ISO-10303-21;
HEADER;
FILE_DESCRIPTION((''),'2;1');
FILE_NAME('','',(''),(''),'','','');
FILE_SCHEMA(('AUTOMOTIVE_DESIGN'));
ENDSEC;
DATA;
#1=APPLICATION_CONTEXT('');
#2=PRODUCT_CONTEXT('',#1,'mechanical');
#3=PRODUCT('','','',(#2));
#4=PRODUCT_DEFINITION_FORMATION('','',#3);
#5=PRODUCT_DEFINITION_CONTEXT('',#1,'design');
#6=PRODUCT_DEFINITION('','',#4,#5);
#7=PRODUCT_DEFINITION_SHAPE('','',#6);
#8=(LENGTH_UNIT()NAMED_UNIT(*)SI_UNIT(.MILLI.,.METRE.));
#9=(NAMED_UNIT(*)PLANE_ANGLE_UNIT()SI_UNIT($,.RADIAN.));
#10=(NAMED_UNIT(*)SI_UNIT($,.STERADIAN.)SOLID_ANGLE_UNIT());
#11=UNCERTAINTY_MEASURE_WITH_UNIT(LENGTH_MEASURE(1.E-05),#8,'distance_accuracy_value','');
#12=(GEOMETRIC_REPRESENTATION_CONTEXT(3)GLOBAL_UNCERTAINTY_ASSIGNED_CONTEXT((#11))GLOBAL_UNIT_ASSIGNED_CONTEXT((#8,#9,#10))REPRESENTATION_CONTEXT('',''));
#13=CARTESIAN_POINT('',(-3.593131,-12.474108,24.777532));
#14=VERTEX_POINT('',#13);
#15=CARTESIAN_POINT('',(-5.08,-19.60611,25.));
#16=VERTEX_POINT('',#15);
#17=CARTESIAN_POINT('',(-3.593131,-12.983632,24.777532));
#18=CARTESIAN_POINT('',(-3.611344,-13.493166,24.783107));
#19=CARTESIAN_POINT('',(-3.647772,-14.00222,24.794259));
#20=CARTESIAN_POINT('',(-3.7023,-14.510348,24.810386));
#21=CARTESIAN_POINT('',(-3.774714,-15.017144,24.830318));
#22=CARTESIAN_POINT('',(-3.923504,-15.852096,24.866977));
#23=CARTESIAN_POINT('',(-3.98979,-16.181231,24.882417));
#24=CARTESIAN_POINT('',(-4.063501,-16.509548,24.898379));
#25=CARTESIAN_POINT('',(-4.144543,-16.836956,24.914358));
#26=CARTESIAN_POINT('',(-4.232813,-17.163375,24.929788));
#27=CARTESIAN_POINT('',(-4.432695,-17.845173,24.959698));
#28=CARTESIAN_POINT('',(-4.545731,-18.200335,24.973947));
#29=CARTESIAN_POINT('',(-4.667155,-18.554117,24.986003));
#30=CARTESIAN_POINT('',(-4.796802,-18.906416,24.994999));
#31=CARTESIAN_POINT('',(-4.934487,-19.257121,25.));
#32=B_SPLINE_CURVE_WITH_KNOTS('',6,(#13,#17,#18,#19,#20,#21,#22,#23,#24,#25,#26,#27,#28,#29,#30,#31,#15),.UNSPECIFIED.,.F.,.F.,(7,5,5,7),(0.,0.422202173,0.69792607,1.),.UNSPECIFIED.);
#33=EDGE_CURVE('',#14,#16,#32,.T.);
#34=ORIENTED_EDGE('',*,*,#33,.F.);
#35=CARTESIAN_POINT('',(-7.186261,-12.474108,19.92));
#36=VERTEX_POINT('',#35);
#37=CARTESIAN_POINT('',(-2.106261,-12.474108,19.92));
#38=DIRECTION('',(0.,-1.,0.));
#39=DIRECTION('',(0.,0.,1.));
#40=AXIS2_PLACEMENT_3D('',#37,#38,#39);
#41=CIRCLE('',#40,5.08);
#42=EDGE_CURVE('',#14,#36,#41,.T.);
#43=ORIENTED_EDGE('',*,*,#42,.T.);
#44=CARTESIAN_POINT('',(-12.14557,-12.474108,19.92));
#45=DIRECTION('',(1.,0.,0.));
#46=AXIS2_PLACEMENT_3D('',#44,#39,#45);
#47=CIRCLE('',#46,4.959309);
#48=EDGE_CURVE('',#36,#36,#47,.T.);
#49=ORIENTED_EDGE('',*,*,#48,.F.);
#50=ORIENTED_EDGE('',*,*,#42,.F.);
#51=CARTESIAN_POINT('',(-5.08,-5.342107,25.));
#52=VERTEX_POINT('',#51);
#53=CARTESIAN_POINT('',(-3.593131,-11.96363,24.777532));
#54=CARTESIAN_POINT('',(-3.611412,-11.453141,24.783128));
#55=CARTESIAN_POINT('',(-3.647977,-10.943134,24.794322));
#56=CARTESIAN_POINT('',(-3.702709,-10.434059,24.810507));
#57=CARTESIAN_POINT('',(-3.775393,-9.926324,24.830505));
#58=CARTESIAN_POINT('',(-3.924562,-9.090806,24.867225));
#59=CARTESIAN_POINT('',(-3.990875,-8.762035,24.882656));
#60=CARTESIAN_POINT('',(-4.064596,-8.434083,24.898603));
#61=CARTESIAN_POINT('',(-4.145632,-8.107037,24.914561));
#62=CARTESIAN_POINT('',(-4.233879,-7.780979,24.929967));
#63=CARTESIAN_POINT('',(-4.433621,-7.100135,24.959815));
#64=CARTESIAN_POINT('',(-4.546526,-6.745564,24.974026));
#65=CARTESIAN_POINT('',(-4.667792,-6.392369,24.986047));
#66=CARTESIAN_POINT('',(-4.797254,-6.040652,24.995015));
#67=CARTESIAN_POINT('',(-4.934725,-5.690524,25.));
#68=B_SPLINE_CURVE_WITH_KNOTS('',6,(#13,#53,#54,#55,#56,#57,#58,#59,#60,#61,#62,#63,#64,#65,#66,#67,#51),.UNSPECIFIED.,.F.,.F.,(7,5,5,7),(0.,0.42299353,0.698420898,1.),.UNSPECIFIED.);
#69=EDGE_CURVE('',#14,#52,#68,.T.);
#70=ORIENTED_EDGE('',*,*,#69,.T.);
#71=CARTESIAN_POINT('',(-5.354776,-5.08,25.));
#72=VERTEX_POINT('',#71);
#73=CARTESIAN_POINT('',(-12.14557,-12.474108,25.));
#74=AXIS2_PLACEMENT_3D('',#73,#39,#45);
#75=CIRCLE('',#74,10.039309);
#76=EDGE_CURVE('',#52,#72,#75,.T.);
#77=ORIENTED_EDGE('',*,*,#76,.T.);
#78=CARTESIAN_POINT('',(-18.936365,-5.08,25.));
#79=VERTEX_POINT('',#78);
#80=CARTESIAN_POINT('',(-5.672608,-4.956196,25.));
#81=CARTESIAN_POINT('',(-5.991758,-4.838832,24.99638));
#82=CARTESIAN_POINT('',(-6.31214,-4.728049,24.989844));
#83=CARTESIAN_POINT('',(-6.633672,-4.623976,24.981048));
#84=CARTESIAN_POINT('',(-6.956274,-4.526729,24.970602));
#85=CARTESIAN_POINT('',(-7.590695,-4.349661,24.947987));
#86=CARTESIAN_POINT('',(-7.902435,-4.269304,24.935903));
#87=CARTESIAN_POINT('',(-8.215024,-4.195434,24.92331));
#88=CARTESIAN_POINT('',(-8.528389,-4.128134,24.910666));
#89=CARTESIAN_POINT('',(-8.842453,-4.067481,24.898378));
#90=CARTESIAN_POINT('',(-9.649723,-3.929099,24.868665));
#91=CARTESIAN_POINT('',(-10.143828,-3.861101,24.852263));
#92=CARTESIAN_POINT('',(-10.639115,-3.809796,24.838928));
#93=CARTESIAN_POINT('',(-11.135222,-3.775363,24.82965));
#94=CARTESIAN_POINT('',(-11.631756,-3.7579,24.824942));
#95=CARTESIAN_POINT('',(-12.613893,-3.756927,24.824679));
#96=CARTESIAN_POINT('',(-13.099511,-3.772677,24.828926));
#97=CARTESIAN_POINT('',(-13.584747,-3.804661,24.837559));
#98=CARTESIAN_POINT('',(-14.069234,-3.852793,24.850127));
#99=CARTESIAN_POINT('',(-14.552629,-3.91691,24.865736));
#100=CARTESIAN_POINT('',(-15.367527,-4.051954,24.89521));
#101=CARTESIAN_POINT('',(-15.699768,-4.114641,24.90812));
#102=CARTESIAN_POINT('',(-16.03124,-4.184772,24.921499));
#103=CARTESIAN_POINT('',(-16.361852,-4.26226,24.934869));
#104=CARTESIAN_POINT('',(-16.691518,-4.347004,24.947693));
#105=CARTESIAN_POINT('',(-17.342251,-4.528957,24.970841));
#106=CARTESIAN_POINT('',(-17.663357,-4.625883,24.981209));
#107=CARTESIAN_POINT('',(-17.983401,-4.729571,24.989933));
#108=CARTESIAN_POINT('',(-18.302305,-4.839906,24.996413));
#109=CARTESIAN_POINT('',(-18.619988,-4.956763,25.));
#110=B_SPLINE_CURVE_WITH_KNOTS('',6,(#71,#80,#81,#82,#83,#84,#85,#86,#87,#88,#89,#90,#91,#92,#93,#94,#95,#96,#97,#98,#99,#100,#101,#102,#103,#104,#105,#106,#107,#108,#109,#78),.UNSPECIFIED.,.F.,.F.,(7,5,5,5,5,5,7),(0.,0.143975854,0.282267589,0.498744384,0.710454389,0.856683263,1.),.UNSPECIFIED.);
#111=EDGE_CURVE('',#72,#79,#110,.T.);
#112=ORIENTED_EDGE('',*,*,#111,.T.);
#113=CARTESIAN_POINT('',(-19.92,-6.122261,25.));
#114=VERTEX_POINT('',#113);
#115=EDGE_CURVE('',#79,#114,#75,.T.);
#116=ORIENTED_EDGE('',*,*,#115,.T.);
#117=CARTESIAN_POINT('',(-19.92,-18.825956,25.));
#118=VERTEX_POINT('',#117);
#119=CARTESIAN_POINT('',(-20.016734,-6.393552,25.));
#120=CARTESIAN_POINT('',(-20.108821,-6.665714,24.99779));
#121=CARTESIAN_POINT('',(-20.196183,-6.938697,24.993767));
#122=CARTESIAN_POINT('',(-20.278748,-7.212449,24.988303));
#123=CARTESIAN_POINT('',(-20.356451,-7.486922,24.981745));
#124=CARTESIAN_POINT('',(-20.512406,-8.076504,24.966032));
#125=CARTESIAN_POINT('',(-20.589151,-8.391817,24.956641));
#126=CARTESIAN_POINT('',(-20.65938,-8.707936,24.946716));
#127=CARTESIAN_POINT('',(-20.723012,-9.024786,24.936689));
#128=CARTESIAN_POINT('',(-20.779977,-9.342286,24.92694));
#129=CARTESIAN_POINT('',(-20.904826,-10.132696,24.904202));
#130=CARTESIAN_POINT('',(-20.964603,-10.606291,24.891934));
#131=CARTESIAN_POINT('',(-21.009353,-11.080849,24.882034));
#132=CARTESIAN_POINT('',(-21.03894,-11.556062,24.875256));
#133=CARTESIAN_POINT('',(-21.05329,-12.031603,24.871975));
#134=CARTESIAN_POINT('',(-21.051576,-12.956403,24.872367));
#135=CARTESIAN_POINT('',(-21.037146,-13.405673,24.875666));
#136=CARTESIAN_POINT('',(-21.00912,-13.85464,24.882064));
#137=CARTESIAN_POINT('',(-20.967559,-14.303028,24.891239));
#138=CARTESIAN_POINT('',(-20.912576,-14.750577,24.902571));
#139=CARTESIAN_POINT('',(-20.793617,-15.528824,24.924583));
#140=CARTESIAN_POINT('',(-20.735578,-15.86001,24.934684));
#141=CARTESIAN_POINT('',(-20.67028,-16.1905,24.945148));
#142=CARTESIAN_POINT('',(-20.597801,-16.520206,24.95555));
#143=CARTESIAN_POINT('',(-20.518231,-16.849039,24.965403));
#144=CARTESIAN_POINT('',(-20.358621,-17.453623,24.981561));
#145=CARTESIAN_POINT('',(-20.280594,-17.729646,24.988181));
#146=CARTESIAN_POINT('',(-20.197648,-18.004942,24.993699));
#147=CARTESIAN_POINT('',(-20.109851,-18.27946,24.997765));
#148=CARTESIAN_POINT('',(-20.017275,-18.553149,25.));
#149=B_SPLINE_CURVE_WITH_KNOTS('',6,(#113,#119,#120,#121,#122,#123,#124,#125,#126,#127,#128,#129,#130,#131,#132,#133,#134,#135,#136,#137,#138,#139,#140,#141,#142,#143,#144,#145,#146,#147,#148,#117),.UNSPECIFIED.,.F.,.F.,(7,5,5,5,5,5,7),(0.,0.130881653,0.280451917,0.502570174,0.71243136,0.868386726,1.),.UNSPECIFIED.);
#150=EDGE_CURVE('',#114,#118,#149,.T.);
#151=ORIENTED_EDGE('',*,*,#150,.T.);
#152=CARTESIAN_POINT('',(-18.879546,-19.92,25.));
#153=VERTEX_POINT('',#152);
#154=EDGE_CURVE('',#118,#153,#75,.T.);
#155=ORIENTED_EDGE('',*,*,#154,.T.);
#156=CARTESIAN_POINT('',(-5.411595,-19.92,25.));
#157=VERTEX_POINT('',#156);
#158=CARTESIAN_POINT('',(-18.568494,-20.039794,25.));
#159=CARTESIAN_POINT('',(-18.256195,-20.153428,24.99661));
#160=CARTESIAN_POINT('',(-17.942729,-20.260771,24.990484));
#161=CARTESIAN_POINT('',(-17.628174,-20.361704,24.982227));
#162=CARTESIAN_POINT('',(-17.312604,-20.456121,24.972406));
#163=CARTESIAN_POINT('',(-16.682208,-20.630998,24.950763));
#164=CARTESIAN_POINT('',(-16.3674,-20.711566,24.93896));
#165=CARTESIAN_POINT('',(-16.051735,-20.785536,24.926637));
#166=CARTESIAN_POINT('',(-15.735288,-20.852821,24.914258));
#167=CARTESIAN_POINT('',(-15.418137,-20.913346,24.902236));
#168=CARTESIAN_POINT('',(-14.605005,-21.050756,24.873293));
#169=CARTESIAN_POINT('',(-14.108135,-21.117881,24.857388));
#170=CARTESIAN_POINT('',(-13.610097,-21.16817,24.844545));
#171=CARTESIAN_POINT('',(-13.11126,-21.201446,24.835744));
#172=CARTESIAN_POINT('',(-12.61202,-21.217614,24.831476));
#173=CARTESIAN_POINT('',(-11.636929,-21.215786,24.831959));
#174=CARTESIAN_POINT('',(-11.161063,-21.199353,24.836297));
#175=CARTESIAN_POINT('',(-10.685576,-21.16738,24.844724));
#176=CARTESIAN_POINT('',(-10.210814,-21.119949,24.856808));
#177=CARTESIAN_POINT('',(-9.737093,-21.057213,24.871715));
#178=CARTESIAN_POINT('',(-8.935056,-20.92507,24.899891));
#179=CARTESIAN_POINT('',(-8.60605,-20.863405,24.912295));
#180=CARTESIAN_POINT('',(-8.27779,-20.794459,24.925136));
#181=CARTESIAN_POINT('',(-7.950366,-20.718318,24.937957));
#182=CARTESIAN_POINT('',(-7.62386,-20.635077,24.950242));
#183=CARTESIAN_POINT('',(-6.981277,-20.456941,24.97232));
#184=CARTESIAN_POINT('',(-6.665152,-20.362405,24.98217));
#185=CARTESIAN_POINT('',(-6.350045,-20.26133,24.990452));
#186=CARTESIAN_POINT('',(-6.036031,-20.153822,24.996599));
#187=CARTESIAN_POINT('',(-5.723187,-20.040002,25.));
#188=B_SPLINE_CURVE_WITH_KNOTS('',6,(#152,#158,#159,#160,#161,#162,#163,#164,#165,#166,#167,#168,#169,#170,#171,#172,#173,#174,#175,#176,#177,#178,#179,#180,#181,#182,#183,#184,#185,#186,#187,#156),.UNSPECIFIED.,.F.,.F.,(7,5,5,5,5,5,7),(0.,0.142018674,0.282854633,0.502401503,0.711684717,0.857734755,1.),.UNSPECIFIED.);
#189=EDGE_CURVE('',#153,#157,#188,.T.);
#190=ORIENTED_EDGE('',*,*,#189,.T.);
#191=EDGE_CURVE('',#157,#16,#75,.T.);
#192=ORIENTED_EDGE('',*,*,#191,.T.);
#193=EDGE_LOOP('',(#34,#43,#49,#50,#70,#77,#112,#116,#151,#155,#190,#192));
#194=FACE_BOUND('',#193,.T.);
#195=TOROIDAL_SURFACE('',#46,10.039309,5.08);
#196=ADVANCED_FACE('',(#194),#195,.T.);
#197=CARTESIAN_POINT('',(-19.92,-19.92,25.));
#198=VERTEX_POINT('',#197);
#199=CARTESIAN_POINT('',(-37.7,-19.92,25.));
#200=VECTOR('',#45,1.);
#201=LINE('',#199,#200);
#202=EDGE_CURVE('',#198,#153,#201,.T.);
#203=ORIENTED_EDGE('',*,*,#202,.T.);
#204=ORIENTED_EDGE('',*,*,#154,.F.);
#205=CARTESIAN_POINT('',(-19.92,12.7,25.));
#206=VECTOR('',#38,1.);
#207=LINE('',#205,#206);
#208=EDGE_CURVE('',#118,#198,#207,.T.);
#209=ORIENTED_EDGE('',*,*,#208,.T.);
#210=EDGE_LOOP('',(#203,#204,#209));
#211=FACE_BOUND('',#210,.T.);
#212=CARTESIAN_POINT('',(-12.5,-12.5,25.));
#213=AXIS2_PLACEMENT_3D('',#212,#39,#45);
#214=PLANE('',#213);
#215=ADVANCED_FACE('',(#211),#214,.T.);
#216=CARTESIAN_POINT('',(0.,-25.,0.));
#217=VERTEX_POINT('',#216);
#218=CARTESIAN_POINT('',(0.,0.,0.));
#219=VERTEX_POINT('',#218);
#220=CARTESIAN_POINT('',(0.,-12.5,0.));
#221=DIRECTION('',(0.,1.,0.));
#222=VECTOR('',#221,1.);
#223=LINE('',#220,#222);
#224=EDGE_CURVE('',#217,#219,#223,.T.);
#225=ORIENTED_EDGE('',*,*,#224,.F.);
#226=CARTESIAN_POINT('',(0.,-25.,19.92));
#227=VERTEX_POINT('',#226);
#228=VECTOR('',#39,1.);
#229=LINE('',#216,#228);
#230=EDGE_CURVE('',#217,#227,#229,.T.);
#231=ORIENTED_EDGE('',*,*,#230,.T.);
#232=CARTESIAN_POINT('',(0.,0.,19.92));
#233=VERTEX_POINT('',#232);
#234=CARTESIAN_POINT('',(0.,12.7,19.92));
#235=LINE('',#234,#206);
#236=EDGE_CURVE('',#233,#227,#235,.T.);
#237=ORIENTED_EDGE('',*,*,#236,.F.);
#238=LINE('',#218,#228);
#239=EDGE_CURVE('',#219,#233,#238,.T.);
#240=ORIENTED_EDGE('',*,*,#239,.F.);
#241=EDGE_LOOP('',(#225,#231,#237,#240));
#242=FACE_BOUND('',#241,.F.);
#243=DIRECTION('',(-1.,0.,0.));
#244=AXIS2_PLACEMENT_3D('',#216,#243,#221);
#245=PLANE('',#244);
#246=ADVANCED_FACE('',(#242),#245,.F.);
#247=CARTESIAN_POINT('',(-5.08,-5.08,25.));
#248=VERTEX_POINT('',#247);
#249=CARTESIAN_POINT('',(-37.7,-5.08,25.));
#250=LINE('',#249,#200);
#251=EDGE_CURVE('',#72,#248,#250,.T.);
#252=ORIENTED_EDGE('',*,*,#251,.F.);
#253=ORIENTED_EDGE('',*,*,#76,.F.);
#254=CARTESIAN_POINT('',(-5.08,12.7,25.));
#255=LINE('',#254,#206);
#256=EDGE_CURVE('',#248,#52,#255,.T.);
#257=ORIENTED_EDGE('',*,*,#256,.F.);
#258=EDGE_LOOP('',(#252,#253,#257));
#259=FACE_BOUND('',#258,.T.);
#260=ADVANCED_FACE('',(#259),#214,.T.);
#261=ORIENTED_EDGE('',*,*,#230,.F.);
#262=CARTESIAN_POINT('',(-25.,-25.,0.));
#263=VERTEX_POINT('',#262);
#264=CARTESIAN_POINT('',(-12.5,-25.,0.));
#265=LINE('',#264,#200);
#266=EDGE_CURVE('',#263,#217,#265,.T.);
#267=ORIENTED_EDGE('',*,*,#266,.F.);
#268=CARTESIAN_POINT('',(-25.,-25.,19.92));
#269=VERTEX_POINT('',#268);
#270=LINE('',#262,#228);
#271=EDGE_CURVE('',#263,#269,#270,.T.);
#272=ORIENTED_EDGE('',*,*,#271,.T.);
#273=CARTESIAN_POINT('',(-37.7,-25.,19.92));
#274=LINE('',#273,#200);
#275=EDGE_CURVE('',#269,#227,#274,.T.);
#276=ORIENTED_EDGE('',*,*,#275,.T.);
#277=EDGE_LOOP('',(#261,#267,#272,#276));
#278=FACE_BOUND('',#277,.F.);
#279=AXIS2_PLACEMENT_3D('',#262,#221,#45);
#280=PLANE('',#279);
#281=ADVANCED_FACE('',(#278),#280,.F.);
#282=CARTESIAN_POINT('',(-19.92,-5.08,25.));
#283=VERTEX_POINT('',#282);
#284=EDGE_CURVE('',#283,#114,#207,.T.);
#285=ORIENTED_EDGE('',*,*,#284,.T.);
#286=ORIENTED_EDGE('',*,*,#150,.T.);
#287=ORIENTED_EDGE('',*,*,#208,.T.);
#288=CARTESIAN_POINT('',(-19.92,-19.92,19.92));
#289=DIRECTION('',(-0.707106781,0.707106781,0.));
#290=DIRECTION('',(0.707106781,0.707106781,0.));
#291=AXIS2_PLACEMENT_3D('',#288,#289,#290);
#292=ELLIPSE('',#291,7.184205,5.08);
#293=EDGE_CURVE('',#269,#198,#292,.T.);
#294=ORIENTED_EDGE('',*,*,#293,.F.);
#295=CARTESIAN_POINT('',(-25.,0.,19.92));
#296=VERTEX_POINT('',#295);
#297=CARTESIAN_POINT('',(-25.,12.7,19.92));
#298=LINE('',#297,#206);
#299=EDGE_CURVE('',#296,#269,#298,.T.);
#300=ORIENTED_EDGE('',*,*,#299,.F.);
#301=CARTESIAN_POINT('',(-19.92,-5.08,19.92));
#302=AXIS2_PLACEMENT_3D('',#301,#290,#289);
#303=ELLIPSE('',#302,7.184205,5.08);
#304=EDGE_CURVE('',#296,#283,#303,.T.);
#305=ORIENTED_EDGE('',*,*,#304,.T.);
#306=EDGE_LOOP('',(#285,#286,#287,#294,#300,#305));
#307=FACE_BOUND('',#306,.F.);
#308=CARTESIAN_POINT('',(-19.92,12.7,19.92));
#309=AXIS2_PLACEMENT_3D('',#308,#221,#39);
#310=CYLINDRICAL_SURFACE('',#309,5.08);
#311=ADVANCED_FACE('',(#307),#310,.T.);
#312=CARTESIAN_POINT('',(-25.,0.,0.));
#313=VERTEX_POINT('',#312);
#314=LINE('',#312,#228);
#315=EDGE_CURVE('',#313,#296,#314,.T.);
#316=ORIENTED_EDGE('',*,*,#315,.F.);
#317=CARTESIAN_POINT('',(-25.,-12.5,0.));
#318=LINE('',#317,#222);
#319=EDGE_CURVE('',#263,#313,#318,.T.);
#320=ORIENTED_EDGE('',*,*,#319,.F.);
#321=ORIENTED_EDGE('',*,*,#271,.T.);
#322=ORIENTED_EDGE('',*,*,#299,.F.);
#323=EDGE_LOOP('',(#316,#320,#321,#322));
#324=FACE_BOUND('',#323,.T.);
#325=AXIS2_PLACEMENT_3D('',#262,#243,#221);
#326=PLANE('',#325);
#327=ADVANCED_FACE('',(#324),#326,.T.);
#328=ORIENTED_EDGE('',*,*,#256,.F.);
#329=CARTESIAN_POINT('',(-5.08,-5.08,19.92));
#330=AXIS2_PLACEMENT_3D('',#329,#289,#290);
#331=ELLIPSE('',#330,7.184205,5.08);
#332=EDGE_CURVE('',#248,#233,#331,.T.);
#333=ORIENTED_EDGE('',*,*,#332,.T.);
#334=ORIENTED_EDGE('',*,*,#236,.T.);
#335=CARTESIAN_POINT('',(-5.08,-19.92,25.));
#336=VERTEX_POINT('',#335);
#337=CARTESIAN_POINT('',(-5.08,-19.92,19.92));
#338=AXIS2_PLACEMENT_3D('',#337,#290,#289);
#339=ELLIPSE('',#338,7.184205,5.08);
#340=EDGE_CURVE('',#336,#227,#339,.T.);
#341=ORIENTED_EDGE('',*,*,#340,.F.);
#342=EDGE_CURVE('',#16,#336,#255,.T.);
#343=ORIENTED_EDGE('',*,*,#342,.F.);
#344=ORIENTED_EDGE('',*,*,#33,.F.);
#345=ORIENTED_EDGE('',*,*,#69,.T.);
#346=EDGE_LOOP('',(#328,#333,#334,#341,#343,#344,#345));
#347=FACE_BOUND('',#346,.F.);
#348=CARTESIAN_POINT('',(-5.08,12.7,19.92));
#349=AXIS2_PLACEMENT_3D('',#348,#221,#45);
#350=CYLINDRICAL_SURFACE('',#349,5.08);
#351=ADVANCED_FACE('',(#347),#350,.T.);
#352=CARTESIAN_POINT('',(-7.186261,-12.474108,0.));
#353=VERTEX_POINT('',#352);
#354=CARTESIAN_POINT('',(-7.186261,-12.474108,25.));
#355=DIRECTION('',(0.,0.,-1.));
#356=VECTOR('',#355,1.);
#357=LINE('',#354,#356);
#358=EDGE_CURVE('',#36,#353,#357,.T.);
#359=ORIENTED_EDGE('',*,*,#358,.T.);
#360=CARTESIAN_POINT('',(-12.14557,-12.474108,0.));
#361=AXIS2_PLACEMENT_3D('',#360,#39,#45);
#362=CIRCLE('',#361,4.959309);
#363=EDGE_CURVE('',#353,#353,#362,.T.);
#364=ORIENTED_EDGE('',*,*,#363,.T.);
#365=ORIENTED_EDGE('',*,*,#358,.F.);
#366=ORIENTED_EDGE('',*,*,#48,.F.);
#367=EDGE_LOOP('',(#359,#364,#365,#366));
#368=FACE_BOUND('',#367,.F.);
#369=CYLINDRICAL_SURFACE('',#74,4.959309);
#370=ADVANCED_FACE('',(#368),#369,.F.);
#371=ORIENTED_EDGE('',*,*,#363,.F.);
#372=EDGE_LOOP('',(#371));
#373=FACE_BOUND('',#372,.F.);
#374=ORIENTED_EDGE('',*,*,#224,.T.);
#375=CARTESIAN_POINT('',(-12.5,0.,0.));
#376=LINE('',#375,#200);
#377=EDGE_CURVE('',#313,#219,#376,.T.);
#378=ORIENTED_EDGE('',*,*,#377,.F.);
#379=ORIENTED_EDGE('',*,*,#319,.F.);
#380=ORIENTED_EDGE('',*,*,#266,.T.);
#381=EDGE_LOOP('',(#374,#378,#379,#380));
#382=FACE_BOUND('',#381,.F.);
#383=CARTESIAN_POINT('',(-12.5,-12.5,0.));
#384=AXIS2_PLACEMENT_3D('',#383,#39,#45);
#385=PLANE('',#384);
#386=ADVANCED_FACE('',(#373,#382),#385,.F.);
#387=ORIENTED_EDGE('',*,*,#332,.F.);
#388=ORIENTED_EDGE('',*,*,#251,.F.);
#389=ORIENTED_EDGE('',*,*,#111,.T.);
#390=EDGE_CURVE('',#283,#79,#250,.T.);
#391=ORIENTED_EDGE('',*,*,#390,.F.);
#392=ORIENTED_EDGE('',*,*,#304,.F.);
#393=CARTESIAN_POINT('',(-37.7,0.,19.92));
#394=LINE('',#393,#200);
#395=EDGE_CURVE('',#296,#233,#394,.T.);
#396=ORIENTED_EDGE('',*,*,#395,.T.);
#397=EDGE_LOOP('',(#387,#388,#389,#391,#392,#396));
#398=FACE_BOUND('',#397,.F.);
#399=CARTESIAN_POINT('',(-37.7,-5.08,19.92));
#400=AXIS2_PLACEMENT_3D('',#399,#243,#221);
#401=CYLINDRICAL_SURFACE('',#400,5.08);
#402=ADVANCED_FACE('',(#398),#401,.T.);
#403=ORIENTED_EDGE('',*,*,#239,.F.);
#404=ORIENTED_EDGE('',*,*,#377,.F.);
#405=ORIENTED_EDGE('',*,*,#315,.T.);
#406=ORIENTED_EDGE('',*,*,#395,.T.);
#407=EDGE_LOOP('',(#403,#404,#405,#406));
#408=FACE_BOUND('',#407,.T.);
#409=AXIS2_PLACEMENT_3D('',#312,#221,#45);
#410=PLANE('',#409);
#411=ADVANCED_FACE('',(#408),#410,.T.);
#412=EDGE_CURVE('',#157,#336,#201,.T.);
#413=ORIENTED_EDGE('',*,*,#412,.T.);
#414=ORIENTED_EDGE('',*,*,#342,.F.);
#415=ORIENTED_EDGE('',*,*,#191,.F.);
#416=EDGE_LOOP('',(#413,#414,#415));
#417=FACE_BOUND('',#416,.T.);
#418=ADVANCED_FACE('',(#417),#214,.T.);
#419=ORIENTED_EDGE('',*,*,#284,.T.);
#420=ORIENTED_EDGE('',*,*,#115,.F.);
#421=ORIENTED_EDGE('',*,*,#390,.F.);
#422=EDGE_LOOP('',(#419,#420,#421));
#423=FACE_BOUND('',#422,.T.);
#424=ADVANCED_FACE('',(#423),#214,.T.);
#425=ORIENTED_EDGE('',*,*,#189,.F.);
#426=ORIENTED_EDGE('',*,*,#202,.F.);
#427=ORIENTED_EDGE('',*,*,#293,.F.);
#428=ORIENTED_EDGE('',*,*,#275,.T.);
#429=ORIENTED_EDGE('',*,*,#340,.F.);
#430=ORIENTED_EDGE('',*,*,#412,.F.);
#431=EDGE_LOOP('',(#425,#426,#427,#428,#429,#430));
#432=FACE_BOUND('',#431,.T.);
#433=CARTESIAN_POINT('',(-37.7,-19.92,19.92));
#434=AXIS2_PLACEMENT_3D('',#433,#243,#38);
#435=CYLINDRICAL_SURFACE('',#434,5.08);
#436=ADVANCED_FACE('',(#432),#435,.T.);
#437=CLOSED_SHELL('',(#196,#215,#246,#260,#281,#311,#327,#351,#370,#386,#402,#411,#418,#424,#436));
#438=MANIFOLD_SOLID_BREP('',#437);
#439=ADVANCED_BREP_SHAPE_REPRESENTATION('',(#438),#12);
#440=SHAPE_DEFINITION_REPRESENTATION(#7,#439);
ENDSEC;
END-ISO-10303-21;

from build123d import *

# Parameters (mm, degrees)
F0_W        = 25
F0_H        = 25
F1_DEPTH    = 25
F2_R        = 4.9593089968
F3_DEPTH    = 25.4
F4_T1_DEPTH = 50.4
F4_T3_DEPTH = 50.4


# Not quite as in the source:
# - a fillet or chamfer that OpenCascade refuses, or shapes differently, is made with other operations: its cross-section is extruded or revolved along the edge and cut away or added


with BuildPart() as f1:
    # F0 (on Top) → F1 (new body)
    with BuildSketch(Plane.XY):
        with Locations((-12.5, -12.5)):
            Rectangle(F0_W, F0_H)
    extrude(amount=F1_DEPTH)

    # F2 (on face) → F3 (cut)
    with BuildSketch(Plane.XY.offset(25)):
        with Locations((-12.1455704793, -12.4741084874)):
            Circle(F2_R)
    extrude(amount=-F3_DEPTH, mode=Mode.SUBTRACT)

    # F4: fillet of radius 5.08 on 5 edges, made by hand

    # F4_s2 → F4_t1 (cut)
    with BuildSketch(Plane.XZ.offset(-12.7)):
        with BuildLine():
            ThreePointArc((0, 19.92), (-1.4878975516, 23.5121024484), (-5.08, 25))
            Line((-5.08, 25), (0, 25))
            Line((0, 25), (0, 19.92))
        make_face()
        with BuildLine():
            ThreePointArc((-19.92, 25), (-23.5121024484, 23.5121024484), (-25, 19.92))
            Line((-25, 19.92), (-25, 25))
            Line((-25, 25), (-19.92, 25))
        make_face()
    extrude(amount=F4_T1_DEPTH, mode=Mode.SUBTRACT)

    # F4_s4 → F4_t3 (cut)
    with BuildSketch(Plane.YZ.offset(-37.7)):
        with BuildLine():
            ThreePointArc((-25, 19.92), (-23.5121024484, 23.5121024484), (-19.92, 25))
            Line((-19.92, 25), (-25, 25))
            Line((-25, 25), (-25, 19.92))
        make_face()
        with BuildLine():
            ThreePointArc((0, 19.92), (-1.4878975516, 23.5121024484), (-5.08, 25))
            Line((-5.08, 25), (0, 25))
            Line((0, 25), (0, 19.92))
        make_face()
    extrude(amount=F4_T3_DEPTH, mode=Mode.SUBTRACT)

    # F4_s5 → F4_t6 (revolve, cut)
    with BuildSketch(Plane.XZ.offset(12.4741084874)):
        with BuildLine():
            ThreePointArc((-2.1062614826, 25), (-5.698363931, 23.5121024484), (-7.1862614826, 19.92))
            Line((-7.1862614826, 19.92), (-7.1862614826, 25))
            Line((-7.1862614826, 25), (-2.1062614826, 25))
        make_face()
    revolve(axis=Axis((-12.1455704793, -12.4741084874, 25), (0, 0, 1)), mode=Mode.SUBTRACT)


solid = f1.part
